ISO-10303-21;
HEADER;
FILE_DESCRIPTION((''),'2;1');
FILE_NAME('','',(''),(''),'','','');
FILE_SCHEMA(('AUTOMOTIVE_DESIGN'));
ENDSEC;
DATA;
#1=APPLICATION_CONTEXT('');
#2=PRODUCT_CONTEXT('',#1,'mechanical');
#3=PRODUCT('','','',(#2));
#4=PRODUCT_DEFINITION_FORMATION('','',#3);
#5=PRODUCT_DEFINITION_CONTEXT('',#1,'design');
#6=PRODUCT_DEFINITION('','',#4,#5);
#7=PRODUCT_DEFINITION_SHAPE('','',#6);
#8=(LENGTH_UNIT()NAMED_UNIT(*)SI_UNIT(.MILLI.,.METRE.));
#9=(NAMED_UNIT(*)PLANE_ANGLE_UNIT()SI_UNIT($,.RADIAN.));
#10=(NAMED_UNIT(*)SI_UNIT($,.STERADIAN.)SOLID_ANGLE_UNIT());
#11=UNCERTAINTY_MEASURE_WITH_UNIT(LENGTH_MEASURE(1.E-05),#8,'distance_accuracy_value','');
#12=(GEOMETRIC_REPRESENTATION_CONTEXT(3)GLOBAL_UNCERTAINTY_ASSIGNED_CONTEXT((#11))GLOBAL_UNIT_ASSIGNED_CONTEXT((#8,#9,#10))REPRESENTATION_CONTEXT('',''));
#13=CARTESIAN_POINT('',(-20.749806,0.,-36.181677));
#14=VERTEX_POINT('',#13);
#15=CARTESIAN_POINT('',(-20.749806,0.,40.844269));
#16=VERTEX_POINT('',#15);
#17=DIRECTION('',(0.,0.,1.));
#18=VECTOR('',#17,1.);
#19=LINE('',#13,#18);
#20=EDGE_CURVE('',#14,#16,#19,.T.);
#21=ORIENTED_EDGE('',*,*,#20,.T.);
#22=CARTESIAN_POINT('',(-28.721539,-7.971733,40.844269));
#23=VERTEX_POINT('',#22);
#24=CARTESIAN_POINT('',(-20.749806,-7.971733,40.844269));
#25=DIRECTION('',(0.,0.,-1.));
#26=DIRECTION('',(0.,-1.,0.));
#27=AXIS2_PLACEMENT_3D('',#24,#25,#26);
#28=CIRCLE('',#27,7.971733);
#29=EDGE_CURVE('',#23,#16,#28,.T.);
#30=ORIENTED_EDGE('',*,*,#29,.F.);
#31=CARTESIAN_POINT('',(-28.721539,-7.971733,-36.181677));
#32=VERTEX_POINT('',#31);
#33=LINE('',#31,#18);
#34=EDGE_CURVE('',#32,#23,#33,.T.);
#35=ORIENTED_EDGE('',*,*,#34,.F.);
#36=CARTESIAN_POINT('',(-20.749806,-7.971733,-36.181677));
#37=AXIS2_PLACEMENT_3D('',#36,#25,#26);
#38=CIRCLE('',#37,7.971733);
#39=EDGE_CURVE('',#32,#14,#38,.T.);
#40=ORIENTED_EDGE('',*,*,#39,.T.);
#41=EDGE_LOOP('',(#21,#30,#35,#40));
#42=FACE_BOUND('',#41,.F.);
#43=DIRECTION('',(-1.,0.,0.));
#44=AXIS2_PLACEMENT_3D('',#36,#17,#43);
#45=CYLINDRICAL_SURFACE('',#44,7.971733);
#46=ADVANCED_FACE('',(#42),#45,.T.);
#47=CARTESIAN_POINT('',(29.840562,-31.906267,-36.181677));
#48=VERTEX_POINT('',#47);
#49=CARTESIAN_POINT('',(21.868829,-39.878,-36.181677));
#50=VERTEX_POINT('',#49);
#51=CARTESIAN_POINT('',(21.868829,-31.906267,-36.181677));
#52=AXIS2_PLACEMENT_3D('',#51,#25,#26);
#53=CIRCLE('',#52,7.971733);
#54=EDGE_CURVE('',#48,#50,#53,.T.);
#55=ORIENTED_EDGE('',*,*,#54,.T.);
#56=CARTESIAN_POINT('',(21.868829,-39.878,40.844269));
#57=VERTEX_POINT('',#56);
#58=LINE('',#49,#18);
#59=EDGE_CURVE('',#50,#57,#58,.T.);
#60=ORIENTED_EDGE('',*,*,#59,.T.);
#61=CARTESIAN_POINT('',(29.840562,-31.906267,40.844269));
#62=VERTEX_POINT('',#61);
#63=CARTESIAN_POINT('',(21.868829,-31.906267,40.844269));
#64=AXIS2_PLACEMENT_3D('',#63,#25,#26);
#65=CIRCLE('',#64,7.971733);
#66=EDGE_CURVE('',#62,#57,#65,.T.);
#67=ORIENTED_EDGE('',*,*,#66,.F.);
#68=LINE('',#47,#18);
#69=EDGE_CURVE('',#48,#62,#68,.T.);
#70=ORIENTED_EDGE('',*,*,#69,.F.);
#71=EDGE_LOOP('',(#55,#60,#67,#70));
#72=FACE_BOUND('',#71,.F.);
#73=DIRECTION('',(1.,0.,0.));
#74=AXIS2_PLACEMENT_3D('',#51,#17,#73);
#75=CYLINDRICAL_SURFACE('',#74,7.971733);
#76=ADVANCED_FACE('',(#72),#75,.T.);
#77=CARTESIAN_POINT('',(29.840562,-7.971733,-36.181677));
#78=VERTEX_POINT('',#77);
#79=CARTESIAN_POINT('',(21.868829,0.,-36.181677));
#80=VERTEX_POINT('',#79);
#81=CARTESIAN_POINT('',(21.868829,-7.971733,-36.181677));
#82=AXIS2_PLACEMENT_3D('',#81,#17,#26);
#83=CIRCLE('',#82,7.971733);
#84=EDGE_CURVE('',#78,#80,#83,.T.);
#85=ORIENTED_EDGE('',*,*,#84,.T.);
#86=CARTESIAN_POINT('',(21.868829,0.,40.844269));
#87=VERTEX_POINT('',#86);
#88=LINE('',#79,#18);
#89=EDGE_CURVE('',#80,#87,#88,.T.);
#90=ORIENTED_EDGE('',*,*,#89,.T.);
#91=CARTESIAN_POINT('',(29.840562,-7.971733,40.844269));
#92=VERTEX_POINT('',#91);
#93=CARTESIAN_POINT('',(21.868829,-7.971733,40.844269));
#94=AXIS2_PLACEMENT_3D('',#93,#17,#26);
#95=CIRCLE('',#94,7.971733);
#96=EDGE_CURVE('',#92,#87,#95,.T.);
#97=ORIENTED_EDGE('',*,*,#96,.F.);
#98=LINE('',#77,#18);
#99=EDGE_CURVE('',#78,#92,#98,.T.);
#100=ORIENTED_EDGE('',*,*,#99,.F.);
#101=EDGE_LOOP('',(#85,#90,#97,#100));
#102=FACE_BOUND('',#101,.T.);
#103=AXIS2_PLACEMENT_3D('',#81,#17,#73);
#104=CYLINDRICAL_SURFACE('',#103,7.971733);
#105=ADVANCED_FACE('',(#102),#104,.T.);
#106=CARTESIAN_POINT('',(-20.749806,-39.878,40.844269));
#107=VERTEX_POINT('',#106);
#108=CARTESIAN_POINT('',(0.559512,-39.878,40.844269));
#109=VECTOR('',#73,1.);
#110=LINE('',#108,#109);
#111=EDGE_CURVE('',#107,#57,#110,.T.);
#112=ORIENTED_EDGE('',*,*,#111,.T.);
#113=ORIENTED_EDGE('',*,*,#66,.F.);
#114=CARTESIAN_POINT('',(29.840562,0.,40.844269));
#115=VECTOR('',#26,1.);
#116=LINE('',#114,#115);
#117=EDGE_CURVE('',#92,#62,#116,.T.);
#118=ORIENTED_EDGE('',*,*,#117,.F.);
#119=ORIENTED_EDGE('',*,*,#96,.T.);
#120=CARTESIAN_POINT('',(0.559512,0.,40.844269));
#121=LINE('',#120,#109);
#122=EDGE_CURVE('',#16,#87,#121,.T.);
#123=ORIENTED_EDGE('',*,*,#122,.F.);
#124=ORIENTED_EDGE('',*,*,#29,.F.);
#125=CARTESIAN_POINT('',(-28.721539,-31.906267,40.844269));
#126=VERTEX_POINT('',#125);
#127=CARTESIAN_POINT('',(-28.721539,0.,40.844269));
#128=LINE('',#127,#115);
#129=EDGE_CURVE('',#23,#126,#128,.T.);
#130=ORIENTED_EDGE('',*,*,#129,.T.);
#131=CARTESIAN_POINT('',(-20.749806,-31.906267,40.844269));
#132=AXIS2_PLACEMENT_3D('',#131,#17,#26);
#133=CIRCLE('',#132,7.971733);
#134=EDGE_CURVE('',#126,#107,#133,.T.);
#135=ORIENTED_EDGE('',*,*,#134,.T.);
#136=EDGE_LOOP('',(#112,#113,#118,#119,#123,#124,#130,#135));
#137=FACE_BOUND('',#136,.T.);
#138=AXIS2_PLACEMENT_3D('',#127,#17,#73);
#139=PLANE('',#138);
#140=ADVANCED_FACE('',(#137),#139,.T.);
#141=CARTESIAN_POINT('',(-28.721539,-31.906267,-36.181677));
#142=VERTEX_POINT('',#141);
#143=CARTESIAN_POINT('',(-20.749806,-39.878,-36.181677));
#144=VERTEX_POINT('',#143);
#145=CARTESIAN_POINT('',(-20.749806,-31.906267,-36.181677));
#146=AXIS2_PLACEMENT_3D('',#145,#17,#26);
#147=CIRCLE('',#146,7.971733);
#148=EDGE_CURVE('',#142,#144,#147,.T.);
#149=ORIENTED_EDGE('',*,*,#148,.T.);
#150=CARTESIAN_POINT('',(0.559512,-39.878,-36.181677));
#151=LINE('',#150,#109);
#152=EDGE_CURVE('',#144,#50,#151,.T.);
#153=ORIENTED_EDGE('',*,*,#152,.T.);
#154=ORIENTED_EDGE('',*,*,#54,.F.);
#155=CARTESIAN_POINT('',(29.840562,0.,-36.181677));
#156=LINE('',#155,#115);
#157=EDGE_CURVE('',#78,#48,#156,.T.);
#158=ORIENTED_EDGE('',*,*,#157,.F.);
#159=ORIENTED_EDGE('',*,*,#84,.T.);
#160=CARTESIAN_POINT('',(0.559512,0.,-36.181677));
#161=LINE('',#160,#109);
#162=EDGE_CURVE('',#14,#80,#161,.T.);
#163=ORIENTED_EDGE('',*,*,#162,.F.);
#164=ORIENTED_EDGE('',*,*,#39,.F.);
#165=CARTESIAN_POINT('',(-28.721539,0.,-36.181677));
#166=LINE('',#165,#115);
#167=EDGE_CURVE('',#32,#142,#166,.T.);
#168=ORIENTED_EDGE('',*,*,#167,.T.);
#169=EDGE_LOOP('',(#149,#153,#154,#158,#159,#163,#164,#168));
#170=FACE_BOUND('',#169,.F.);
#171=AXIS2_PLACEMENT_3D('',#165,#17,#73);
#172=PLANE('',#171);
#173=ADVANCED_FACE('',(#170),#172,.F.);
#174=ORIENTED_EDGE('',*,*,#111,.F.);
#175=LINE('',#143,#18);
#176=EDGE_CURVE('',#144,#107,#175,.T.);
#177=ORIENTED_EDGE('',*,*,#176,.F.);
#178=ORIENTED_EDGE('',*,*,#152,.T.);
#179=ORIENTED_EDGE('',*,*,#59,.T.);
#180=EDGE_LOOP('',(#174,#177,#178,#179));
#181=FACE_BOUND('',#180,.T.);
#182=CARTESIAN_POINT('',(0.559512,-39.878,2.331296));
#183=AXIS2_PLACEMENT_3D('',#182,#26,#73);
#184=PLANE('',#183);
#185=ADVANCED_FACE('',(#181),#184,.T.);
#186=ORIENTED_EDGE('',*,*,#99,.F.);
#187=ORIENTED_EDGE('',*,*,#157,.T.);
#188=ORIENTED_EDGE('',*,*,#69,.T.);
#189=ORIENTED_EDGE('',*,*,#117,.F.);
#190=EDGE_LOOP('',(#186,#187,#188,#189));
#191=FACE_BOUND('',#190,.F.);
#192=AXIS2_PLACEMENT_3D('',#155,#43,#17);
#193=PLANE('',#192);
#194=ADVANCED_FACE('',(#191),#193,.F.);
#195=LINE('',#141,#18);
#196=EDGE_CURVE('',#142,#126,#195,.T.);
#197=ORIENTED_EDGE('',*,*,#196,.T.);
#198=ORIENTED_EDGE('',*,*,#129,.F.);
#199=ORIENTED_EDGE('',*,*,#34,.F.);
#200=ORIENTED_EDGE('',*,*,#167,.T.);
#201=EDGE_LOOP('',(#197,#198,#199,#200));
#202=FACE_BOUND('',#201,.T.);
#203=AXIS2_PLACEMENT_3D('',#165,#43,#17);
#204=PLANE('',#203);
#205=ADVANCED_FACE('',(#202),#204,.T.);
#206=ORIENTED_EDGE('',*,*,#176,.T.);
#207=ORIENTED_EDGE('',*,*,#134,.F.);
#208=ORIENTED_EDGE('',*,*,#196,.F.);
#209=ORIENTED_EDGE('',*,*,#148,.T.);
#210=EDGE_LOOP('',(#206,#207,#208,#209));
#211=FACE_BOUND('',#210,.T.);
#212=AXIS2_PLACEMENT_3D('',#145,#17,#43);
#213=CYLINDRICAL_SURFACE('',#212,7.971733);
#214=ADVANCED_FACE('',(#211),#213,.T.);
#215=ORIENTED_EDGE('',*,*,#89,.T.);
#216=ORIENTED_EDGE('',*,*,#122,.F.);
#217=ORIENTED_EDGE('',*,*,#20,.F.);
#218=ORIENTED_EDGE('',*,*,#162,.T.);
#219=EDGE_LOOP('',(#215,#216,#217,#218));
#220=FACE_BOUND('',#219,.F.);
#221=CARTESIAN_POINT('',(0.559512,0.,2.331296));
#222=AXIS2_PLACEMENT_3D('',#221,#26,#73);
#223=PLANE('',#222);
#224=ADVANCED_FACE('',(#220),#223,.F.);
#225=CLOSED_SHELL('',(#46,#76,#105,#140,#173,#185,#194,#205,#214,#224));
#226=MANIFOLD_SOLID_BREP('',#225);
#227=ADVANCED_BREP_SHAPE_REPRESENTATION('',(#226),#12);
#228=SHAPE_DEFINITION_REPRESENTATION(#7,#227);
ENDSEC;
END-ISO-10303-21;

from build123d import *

# Parameters (mm, degrees)
F0_W     = 58.5621017963
F0_H     = 77.0259462297
F1_DEPTH = 39.878
F2_R     = 7.971733183
F3_R     = 6.2062238441
F6_DEPTH = 0.762


# Not quite as in the source:
# - the program builds the solid bodies; features that only make, move or delete a surface that nothing else refers to are left out


with BuildPart() as f1:
    # F0 (on Front) → F1 (new body)
    with BuildSketch(Plane.XZ):
        with Locations((0.5595115945, 2.331295982)):
            Rectangle(F0_W, F0_H)
    extrude(amount=F1_DEPTH)

    # F2
    f2_edges = [f1.edges().sort_by_distance(p)[0] for p in [
        (29.840562, -39.878, 2.331296),
        (-28.721539, -39.878, 2.331296),
        (29.840562, 0, 2.331296),
        (-28.721539, 0, 2.331296),
    ]]
    fillet(f2_edges, radius=F2_R)

    # F3 (on face) → F6 (join)
    with BuildSketch(Plane.XY.offset(40.8442690969)):
        with BuildLine():
            Line((15.5188293097, -6.3193492971), (-17.34697557, -6.3193492971))
            ThreePointArc((-17.34697557, -6.3193492971), (-21.8371036305, -8.1792212365), (-23.69697557, -12.6693492971))
            Line((-23.69697557, -12.6693492971), (-23.69697557, -25.556266817))
            ThreePointArc((-23.69697557, -25.556266817), (-21.8371036305, -30.0463948776), (-17.34697557, -31.906266817))
            Line((-17.34697557, -31.906266817), (15.5188293097, -31.906266817))
            ThreePointArc((15.5188293097, -31.906266817), (20.0089573702, -30.0463948776), (21.8688293097, -25.556266817))
            Line((21.8688293097, -25.556266817), (21.8688293097, -12.6693492971))
            ThreePointArc((21.8688293097, -12.6693492971), (20.0089573702, -8.1792212365), (15.5188293097, -6.3193492971))
        make_face()
        Polygon((-8.0732123646, -19.3963646889), (-10.657480345, -23.8724481314), (-15.826016306, -23.8724481314), (-18.4102842865, -19.3963646889), (-15.826016306, -14.9202812463), (-10.657480345, -14.9202812463), align=None, mode=Mode.SUBTRACT)
        with Locations((8.9521687478, -19.2098617554)):
            Circle(F3_R, mode=Mode.SUBTRACT)
    extrude(amount=-F6_DEPTH)


solid = f1.part
